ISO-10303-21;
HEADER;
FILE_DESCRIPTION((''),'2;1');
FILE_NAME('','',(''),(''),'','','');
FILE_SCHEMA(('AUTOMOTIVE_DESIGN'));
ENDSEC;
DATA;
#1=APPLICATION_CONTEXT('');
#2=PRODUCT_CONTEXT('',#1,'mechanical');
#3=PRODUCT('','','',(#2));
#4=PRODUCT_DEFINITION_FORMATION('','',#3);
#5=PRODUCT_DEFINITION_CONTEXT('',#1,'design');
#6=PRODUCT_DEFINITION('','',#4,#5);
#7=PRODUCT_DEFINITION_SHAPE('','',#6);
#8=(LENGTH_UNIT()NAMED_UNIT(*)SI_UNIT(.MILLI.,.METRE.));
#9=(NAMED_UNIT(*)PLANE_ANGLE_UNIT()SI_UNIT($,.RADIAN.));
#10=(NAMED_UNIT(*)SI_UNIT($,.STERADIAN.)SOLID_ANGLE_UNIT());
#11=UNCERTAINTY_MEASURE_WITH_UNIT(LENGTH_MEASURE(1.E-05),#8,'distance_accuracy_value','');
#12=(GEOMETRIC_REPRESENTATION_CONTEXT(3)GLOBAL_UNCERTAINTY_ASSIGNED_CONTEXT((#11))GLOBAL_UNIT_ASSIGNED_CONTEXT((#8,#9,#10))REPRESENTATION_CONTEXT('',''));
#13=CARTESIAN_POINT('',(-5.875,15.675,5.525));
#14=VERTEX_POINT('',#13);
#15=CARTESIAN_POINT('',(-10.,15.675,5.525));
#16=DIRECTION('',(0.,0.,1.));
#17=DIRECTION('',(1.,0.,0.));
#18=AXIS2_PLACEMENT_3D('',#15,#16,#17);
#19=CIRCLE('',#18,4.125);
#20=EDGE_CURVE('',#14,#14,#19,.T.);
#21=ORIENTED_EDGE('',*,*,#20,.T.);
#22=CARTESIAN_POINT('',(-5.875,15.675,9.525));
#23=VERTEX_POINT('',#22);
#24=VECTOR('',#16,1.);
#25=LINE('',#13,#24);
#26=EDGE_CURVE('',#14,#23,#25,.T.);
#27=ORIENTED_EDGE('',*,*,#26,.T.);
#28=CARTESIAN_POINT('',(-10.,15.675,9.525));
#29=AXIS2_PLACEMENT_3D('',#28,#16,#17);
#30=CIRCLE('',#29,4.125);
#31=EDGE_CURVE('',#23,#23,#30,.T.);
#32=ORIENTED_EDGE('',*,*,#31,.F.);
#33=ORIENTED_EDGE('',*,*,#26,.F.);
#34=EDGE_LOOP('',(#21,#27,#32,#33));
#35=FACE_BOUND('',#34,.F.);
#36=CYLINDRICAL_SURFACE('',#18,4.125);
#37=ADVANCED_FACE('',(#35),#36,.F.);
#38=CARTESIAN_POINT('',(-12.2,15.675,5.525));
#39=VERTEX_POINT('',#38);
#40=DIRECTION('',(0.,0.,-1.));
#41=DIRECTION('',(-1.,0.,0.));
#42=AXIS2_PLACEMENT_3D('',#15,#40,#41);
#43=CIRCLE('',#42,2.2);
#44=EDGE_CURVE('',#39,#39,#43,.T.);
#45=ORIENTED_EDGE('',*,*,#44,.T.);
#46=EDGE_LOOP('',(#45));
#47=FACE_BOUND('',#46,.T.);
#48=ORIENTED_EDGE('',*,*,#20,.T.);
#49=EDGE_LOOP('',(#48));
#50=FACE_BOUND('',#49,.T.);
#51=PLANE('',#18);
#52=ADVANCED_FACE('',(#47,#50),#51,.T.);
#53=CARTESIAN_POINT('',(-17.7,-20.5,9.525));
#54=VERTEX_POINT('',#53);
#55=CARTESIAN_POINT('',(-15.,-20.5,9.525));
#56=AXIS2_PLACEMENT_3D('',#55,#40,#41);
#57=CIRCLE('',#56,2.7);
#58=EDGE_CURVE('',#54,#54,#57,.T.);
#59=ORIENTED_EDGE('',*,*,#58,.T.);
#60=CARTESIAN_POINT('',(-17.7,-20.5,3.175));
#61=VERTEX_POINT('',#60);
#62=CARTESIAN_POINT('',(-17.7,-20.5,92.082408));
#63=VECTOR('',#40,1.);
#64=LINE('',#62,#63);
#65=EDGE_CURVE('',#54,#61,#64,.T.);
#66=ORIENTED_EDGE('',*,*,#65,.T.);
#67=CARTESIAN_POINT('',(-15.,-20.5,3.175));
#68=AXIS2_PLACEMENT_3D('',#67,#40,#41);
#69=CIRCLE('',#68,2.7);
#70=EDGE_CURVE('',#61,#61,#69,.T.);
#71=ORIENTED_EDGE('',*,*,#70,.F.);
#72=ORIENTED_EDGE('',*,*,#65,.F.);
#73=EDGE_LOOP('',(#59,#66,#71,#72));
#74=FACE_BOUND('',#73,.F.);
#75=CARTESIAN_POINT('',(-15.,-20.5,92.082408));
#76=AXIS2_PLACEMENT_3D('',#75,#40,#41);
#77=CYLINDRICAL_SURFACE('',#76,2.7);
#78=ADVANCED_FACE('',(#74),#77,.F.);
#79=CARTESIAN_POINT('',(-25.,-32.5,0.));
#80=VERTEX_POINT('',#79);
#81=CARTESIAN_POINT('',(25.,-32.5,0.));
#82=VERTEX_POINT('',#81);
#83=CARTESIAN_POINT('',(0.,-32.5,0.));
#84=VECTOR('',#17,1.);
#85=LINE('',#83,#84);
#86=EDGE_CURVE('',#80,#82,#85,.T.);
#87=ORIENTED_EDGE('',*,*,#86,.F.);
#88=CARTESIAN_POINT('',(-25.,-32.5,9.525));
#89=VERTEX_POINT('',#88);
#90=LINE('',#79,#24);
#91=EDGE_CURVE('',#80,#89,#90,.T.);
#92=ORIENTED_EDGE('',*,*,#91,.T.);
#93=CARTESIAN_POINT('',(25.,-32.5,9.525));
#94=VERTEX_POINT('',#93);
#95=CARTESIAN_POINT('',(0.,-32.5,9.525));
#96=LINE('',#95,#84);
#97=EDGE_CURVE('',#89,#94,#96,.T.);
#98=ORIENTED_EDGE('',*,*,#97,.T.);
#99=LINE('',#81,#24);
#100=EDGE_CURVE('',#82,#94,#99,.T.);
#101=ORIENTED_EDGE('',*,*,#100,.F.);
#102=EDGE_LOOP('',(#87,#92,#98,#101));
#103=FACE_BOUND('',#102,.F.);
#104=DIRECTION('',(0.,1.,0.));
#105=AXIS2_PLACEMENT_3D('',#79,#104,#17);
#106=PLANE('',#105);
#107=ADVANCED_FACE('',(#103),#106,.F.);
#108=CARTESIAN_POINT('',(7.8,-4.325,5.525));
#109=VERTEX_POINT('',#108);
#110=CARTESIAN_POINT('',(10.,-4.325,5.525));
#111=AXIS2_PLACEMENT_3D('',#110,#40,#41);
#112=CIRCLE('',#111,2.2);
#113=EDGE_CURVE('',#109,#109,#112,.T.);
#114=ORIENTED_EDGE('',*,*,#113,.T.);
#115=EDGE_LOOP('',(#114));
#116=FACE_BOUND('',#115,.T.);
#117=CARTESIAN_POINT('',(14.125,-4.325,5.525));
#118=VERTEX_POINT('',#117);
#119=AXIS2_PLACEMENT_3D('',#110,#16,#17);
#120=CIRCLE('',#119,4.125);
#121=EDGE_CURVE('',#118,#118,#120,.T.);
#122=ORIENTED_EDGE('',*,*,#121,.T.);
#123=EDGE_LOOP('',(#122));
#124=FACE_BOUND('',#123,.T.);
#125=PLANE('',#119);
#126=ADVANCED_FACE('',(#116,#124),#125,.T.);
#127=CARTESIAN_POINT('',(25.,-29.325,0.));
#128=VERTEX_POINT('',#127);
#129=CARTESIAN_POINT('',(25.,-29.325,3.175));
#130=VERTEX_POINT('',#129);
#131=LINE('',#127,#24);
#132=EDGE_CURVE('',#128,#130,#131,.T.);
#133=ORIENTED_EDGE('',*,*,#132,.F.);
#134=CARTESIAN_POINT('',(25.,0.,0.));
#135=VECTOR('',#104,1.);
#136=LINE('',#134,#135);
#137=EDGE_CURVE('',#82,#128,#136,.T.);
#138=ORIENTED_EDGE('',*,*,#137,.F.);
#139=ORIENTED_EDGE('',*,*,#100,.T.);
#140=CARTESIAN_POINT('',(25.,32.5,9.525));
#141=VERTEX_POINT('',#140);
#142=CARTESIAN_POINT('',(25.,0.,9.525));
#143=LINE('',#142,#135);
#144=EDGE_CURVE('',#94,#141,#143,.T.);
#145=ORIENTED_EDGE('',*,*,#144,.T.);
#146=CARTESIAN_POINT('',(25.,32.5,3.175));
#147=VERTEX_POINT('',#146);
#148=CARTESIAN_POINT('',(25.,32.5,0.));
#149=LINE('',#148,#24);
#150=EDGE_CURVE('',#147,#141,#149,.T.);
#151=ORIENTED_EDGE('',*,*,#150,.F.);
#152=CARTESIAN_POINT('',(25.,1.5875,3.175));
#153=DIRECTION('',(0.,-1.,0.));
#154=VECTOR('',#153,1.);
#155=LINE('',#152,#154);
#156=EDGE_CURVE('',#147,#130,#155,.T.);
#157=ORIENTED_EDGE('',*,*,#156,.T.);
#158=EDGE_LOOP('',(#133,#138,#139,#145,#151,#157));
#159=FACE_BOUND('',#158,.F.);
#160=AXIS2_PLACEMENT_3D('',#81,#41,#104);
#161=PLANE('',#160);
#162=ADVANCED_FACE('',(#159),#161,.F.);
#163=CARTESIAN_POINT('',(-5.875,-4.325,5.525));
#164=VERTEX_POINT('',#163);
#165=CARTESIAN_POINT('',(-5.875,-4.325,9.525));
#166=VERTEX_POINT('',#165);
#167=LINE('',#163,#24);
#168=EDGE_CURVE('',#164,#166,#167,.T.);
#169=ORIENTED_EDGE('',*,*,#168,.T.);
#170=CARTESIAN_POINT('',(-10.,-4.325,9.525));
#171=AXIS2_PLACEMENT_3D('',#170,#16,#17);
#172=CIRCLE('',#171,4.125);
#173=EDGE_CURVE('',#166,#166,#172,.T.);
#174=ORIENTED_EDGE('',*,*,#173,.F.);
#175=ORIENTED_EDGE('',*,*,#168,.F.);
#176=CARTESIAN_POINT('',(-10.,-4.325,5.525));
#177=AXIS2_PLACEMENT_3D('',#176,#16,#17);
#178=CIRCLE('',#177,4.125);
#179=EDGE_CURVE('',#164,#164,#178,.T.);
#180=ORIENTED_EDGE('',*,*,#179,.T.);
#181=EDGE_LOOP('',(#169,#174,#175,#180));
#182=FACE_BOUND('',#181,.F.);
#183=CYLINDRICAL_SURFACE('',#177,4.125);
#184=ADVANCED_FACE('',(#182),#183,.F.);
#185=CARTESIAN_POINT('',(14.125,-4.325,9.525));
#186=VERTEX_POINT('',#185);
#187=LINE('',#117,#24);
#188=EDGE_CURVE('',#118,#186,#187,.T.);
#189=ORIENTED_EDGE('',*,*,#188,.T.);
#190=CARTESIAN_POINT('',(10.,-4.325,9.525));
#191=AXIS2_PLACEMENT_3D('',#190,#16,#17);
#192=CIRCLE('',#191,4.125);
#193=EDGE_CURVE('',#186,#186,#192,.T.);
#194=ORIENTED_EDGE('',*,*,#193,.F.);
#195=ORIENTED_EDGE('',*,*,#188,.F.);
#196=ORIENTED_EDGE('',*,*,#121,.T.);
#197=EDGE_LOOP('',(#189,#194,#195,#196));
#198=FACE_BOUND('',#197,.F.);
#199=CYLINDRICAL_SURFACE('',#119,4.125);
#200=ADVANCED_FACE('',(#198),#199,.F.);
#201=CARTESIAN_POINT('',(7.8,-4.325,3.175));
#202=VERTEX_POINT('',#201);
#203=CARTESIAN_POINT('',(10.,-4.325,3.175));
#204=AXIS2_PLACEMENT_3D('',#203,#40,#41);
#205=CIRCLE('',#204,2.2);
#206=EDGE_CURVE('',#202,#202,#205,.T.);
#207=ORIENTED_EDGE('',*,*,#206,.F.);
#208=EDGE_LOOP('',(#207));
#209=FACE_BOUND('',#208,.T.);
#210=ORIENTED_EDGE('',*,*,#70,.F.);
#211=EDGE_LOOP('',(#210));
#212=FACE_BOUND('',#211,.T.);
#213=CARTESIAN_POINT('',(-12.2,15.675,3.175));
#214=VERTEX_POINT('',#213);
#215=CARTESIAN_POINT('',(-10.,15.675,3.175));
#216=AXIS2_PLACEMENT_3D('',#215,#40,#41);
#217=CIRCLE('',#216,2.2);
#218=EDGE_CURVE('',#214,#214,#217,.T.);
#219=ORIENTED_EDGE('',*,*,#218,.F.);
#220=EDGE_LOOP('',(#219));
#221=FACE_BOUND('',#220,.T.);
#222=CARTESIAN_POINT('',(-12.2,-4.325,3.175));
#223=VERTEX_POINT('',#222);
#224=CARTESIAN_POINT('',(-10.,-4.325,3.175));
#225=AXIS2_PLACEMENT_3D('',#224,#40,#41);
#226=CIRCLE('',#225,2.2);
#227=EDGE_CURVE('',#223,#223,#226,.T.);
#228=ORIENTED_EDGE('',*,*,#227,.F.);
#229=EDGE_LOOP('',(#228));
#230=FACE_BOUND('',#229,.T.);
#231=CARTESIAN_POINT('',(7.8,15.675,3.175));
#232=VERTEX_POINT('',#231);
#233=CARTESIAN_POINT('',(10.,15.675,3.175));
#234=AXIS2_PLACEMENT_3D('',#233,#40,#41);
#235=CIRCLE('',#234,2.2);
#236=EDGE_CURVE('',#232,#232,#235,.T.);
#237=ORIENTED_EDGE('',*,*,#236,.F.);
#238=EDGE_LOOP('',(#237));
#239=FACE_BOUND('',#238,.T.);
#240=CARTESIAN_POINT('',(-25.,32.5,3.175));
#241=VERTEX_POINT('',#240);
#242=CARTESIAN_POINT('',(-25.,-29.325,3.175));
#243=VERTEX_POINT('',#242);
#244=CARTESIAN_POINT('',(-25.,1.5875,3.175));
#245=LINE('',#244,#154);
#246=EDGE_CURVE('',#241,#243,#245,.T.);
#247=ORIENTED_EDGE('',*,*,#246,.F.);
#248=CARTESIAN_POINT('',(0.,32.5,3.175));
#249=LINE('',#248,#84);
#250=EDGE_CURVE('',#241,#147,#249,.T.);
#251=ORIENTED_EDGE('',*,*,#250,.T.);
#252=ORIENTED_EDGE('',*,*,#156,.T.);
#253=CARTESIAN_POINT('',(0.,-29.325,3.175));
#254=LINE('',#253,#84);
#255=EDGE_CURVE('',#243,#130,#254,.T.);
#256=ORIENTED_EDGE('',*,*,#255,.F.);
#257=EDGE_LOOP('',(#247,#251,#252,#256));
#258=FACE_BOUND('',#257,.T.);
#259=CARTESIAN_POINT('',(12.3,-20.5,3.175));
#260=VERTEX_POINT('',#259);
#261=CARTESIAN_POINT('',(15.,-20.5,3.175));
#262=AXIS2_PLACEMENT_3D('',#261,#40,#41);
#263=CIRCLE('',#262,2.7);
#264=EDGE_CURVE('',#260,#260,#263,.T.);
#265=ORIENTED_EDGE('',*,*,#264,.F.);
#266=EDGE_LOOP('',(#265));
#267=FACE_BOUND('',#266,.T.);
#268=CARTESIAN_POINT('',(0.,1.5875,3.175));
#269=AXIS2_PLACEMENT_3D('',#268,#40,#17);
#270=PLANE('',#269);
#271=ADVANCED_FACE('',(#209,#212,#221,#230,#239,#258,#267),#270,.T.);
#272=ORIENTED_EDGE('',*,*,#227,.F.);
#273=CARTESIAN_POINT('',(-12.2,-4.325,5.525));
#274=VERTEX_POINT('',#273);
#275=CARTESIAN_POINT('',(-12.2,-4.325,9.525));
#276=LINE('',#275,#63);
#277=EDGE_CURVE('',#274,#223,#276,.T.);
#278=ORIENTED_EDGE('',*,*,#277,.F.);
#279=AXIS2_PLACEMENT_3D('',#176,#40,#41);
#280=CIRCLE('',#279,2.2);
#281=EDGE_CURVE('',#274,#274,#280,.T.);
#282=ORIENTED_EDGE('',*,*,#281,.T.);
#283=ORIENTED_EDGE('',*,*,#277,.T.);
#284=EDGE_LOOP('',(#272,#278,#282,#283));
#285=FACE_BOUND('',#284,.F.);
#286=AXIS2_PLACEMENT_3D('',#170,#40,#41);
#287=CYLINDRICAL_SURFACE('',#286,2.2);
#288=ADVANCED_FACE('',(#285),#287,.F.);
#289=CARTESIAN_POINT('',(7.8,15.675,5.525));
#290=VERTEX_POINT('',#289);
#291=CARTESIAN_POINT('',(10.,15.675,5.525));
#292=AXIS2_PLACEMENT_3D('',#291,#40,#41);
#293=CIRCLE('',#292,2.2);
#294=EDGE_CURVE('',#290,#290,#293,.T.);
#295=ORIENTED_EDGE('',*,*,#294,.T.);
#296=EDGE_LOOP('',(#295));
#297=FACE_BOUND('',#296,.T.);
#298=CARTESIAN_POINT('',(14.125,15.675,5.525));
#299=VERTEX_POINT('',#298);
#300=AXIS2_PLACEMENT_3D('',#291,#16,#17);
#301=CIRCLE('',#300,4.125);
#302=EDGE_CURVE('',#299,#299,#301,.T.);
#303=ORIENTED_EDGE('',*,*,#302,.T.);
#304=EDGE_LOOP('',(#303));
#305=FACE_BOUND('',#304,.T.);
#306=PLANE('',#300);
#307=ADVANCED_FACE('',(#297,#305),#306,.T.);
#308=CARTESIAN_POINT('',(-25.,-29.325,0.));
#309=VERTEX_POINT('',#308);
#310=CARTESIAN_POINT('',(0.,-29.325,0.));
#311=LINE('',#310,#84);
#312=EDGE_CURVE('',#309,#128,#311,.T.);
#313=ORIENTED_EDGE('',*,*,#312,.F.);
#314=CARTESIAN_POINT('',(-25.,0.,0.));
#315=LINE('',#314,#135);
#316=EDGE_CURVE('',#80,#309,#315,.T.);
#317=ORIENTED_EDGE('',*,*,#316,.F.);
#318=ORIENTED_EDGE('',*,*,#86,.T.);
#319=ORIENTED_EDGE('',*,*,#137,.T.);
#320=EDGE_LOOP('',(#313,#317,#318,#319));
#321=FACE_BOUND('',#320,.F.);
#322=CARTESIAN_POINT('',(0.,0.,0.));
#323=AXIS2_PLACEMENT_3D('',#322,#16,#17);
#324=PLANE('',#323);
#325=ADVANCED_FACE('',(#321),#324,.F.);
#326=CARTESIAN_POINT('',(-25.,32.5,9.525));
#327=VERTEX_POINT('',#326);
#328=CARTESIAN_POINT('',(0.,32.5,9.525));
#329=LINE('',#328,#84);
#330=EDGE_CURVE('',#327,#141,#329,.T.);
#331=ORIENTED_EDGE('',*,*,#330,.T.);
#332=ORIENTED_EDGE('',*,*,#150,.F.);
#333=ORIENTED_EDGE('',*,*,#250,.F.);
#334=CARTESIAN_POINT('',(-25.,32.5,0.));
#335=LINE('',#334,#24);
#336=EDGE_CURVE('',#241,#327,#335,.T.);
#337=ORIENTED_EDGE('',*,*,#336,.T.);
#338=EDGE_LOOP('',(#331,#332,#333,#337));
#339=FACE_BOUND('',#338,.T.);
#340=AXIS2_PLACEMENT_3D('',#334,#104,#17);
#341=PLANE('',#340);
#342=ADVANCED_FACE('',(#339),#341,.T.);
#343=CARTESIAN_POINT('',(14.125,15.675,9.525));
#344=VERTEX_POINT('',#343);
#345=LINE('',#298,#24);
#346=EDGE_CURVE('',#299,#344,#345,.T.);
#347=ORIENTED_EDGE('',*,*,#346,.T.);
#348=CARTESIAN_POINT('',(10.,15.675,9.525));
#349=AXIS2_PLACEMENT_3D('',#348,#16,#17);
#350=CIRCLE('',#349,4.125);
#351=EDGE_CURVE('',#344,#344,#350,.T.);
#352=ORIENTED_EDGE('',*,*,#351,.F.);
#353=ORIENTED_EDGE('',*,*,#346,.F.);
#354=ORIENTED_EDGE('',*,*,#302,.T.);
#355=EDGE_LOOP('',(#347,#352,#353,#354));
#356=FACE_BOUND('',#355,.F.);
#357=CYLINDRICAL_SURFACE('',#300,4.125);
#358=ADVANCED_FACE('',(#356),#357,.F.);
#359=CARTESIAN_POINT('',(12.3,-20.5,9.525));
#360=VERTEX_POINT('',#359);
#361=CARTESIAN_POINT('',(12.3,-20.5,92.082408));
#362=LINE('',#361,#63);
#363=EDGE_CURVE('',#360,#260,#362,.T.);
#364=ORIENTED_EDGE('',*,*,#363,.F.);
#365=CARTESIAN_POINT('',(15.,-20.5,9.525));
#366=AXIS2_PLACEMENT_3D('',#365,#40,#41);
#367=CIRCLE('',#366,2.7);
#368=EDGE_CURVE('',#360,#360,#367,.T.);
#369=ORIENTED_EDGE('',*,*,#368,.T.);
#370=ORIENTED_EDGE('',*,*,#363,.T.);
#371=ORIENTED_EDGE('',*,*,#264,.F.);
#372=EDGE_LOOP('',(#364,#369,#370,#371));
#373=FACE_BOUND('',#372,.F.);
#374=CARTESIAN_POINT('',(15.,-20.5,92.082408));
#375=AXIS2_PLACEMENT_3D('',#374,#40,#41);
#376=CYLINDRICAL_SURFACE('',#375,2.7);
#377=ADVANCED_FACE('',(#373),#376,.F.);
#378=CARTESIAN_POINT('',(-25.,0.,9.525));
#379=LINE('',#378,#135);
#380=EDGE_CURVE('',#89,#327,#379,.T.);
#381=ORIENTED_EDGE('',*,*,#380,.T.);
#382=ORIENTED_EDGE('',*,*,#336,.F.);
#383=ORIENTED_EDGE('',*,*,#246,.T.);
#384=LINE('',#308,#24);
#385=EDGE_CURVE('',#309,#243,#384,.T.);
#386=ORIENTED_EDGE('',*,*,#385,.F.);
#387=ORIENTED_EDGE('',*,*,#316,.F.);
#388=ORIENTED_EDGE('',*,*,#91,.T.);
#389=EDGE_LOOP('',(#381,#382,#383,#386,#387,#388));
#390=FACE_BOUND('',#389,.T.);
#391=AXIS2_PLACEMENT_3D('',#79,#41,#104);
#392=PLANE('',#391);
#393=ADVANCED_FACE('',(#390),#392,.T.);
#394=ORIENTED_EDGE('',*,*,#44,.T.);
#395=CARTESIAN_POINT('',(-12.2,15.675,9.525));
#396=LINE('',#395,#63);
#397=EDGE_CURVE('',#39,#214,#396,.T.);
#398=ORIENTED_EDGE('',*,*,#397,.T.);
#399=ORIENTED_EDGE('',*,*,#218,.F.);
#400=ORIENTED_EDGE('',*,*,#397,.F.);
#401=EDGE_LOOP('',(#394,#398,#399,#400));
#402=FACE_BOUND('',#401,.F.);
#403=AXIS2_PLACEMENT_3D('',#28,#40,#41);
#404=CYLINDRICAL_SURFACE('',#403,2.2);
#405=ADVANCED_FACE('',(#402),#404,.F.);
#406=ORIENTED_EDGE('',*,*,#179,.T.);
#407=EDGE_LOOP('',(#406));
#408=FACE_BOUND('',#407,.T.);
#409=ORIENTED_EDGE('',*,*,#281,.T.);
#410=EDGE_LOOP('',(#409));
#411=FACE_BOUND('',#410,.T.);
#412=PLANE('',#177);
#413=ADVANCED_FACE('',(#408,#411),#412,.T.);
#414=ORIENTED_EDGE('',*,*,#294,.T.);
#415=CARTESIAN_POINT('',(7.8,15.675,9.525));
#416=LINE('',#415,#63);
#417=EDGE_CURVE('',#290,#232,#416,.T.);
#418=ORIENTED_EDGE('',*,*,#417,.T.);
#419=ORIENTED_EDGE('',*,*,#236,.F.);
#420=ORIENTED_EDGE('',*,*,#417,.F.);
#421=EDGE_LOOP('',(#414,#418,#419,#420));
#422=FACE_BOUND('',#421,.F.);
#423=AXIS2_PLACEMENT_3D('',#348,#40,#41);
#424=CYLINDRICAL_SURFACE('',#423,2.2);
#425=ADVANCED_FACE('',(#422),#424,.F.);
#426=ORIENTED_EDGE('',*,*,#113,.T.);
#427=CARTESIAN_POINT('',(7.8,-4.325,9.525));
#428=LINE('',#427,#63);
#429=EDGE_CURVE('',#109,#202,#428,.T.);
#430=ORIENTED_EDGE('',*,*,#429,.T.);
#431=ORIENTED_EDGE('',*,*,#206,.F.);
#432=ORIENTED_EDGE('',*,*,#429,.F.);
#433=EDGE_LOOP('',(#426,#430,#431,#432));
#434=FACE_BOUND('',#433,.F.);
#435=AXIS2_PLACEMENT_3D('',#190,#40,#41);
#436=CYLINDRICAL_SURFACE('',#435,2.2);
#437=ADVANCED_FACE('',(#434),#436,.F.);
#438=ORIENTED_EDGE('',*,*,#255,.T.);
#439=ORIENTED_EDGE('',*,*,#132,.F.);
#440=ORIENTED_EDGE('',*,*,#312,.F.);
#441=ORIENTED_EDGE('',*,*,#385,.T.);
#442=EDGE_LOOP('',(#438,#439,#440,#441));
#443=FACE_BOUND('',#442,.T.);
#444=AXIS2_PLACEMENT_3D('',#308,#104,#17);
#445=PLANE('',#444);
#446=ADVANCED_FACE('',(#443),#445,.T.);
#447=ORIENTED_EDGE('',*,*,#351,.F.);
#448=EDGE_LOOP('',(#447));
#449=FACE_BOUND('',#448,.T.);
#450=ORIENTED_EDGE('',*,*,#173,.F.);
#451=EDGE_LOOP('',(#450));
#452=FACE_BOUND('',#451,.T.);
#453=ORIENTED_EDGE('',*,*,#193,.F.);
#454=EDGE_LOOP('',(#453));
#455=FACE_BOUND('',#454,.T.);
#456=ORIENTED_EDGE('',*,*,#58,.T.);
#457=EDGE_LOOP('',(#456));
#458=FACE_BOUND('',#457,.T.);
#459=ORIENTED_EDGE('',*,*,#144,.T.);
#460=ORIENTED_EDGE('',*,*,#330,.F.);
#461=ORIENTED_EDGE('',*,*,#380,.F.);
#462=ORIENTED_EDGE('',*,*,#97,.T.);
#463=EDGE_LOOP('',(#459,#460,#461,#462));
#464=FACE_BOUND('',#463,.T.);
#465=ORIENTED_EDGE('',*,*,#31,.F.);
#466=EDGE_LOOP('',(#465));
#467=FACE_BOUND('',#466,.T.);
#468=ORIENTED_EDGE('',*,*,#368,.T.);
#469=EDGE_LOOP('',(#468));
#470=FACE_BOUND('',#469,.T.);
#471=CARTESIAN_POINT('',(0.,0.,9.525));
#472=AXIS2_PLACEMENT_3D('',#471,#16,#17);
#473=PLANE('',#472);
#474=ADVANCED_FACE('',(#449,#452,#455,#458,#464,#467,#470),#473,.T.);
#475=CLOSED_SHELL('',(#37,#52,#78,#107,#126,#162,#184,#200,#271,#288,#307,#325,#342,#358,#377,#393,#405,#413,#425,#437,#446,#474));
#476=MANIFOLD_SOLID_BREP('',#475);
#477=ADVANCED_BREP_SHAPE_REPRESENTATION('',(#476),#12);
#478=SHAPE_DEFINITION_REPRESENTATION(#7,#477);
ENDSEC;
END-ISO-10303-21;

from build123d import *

# Parameters (mm, degrees)
F0_W           = 50
F0_H           = 65
F1_DEPTH       = 9.525
F2_W           = 50
F2_H           = 61.825
F3_DEPTH       = 3.175
F5_D           = 4.4
F5_CBORE_D     = 8.25
F5_CBORE_DEPTH = 4
F7_D           = 5.4


# Not quite as in the source:
# - a length typed as a fraction of an inch, garbled in the dataset ("3 / 203.2 mm" for 3/8 in), is restored


with BuildPart() as f1:
    # F0 (on Top) → F1 (new body)
    with BuildSketch(Plane.XY):
        Rectangle(F0_W, F0_H)
    extrude(amount=F1_DEPTH)

    # F2 (on face) → F3 (cut)
    with BuildSketch(Plane(origin=(0, 0, 0), x_dir=(1, 0, 0), z_dir=(0, 0, -1))):
        with Locations((0, -1.5875)):
            Rectangle(F2_W, F2_H)
    extrude(amount=-F3_DEPTH, mode=Mode.SUBTRACT)

    # F5 (through all)
    with Locations(Plane.XY.offset(9.525)):
        with Locations((-10, 15.675), (10, 15.675), (10, -4.325), (-10, -4.325)):
            CounterBoreHole(F5_D / 2, F5_CBORE_D / 2, F5_CBORE_DEPTH)

    # F7 (through all)
    with Locations(Plane.XY.offset(9.525)):
        with Locations((-15, -20.5), (15, -20.5)):
            Hole(F7_D / 2)


solid = f1.part
